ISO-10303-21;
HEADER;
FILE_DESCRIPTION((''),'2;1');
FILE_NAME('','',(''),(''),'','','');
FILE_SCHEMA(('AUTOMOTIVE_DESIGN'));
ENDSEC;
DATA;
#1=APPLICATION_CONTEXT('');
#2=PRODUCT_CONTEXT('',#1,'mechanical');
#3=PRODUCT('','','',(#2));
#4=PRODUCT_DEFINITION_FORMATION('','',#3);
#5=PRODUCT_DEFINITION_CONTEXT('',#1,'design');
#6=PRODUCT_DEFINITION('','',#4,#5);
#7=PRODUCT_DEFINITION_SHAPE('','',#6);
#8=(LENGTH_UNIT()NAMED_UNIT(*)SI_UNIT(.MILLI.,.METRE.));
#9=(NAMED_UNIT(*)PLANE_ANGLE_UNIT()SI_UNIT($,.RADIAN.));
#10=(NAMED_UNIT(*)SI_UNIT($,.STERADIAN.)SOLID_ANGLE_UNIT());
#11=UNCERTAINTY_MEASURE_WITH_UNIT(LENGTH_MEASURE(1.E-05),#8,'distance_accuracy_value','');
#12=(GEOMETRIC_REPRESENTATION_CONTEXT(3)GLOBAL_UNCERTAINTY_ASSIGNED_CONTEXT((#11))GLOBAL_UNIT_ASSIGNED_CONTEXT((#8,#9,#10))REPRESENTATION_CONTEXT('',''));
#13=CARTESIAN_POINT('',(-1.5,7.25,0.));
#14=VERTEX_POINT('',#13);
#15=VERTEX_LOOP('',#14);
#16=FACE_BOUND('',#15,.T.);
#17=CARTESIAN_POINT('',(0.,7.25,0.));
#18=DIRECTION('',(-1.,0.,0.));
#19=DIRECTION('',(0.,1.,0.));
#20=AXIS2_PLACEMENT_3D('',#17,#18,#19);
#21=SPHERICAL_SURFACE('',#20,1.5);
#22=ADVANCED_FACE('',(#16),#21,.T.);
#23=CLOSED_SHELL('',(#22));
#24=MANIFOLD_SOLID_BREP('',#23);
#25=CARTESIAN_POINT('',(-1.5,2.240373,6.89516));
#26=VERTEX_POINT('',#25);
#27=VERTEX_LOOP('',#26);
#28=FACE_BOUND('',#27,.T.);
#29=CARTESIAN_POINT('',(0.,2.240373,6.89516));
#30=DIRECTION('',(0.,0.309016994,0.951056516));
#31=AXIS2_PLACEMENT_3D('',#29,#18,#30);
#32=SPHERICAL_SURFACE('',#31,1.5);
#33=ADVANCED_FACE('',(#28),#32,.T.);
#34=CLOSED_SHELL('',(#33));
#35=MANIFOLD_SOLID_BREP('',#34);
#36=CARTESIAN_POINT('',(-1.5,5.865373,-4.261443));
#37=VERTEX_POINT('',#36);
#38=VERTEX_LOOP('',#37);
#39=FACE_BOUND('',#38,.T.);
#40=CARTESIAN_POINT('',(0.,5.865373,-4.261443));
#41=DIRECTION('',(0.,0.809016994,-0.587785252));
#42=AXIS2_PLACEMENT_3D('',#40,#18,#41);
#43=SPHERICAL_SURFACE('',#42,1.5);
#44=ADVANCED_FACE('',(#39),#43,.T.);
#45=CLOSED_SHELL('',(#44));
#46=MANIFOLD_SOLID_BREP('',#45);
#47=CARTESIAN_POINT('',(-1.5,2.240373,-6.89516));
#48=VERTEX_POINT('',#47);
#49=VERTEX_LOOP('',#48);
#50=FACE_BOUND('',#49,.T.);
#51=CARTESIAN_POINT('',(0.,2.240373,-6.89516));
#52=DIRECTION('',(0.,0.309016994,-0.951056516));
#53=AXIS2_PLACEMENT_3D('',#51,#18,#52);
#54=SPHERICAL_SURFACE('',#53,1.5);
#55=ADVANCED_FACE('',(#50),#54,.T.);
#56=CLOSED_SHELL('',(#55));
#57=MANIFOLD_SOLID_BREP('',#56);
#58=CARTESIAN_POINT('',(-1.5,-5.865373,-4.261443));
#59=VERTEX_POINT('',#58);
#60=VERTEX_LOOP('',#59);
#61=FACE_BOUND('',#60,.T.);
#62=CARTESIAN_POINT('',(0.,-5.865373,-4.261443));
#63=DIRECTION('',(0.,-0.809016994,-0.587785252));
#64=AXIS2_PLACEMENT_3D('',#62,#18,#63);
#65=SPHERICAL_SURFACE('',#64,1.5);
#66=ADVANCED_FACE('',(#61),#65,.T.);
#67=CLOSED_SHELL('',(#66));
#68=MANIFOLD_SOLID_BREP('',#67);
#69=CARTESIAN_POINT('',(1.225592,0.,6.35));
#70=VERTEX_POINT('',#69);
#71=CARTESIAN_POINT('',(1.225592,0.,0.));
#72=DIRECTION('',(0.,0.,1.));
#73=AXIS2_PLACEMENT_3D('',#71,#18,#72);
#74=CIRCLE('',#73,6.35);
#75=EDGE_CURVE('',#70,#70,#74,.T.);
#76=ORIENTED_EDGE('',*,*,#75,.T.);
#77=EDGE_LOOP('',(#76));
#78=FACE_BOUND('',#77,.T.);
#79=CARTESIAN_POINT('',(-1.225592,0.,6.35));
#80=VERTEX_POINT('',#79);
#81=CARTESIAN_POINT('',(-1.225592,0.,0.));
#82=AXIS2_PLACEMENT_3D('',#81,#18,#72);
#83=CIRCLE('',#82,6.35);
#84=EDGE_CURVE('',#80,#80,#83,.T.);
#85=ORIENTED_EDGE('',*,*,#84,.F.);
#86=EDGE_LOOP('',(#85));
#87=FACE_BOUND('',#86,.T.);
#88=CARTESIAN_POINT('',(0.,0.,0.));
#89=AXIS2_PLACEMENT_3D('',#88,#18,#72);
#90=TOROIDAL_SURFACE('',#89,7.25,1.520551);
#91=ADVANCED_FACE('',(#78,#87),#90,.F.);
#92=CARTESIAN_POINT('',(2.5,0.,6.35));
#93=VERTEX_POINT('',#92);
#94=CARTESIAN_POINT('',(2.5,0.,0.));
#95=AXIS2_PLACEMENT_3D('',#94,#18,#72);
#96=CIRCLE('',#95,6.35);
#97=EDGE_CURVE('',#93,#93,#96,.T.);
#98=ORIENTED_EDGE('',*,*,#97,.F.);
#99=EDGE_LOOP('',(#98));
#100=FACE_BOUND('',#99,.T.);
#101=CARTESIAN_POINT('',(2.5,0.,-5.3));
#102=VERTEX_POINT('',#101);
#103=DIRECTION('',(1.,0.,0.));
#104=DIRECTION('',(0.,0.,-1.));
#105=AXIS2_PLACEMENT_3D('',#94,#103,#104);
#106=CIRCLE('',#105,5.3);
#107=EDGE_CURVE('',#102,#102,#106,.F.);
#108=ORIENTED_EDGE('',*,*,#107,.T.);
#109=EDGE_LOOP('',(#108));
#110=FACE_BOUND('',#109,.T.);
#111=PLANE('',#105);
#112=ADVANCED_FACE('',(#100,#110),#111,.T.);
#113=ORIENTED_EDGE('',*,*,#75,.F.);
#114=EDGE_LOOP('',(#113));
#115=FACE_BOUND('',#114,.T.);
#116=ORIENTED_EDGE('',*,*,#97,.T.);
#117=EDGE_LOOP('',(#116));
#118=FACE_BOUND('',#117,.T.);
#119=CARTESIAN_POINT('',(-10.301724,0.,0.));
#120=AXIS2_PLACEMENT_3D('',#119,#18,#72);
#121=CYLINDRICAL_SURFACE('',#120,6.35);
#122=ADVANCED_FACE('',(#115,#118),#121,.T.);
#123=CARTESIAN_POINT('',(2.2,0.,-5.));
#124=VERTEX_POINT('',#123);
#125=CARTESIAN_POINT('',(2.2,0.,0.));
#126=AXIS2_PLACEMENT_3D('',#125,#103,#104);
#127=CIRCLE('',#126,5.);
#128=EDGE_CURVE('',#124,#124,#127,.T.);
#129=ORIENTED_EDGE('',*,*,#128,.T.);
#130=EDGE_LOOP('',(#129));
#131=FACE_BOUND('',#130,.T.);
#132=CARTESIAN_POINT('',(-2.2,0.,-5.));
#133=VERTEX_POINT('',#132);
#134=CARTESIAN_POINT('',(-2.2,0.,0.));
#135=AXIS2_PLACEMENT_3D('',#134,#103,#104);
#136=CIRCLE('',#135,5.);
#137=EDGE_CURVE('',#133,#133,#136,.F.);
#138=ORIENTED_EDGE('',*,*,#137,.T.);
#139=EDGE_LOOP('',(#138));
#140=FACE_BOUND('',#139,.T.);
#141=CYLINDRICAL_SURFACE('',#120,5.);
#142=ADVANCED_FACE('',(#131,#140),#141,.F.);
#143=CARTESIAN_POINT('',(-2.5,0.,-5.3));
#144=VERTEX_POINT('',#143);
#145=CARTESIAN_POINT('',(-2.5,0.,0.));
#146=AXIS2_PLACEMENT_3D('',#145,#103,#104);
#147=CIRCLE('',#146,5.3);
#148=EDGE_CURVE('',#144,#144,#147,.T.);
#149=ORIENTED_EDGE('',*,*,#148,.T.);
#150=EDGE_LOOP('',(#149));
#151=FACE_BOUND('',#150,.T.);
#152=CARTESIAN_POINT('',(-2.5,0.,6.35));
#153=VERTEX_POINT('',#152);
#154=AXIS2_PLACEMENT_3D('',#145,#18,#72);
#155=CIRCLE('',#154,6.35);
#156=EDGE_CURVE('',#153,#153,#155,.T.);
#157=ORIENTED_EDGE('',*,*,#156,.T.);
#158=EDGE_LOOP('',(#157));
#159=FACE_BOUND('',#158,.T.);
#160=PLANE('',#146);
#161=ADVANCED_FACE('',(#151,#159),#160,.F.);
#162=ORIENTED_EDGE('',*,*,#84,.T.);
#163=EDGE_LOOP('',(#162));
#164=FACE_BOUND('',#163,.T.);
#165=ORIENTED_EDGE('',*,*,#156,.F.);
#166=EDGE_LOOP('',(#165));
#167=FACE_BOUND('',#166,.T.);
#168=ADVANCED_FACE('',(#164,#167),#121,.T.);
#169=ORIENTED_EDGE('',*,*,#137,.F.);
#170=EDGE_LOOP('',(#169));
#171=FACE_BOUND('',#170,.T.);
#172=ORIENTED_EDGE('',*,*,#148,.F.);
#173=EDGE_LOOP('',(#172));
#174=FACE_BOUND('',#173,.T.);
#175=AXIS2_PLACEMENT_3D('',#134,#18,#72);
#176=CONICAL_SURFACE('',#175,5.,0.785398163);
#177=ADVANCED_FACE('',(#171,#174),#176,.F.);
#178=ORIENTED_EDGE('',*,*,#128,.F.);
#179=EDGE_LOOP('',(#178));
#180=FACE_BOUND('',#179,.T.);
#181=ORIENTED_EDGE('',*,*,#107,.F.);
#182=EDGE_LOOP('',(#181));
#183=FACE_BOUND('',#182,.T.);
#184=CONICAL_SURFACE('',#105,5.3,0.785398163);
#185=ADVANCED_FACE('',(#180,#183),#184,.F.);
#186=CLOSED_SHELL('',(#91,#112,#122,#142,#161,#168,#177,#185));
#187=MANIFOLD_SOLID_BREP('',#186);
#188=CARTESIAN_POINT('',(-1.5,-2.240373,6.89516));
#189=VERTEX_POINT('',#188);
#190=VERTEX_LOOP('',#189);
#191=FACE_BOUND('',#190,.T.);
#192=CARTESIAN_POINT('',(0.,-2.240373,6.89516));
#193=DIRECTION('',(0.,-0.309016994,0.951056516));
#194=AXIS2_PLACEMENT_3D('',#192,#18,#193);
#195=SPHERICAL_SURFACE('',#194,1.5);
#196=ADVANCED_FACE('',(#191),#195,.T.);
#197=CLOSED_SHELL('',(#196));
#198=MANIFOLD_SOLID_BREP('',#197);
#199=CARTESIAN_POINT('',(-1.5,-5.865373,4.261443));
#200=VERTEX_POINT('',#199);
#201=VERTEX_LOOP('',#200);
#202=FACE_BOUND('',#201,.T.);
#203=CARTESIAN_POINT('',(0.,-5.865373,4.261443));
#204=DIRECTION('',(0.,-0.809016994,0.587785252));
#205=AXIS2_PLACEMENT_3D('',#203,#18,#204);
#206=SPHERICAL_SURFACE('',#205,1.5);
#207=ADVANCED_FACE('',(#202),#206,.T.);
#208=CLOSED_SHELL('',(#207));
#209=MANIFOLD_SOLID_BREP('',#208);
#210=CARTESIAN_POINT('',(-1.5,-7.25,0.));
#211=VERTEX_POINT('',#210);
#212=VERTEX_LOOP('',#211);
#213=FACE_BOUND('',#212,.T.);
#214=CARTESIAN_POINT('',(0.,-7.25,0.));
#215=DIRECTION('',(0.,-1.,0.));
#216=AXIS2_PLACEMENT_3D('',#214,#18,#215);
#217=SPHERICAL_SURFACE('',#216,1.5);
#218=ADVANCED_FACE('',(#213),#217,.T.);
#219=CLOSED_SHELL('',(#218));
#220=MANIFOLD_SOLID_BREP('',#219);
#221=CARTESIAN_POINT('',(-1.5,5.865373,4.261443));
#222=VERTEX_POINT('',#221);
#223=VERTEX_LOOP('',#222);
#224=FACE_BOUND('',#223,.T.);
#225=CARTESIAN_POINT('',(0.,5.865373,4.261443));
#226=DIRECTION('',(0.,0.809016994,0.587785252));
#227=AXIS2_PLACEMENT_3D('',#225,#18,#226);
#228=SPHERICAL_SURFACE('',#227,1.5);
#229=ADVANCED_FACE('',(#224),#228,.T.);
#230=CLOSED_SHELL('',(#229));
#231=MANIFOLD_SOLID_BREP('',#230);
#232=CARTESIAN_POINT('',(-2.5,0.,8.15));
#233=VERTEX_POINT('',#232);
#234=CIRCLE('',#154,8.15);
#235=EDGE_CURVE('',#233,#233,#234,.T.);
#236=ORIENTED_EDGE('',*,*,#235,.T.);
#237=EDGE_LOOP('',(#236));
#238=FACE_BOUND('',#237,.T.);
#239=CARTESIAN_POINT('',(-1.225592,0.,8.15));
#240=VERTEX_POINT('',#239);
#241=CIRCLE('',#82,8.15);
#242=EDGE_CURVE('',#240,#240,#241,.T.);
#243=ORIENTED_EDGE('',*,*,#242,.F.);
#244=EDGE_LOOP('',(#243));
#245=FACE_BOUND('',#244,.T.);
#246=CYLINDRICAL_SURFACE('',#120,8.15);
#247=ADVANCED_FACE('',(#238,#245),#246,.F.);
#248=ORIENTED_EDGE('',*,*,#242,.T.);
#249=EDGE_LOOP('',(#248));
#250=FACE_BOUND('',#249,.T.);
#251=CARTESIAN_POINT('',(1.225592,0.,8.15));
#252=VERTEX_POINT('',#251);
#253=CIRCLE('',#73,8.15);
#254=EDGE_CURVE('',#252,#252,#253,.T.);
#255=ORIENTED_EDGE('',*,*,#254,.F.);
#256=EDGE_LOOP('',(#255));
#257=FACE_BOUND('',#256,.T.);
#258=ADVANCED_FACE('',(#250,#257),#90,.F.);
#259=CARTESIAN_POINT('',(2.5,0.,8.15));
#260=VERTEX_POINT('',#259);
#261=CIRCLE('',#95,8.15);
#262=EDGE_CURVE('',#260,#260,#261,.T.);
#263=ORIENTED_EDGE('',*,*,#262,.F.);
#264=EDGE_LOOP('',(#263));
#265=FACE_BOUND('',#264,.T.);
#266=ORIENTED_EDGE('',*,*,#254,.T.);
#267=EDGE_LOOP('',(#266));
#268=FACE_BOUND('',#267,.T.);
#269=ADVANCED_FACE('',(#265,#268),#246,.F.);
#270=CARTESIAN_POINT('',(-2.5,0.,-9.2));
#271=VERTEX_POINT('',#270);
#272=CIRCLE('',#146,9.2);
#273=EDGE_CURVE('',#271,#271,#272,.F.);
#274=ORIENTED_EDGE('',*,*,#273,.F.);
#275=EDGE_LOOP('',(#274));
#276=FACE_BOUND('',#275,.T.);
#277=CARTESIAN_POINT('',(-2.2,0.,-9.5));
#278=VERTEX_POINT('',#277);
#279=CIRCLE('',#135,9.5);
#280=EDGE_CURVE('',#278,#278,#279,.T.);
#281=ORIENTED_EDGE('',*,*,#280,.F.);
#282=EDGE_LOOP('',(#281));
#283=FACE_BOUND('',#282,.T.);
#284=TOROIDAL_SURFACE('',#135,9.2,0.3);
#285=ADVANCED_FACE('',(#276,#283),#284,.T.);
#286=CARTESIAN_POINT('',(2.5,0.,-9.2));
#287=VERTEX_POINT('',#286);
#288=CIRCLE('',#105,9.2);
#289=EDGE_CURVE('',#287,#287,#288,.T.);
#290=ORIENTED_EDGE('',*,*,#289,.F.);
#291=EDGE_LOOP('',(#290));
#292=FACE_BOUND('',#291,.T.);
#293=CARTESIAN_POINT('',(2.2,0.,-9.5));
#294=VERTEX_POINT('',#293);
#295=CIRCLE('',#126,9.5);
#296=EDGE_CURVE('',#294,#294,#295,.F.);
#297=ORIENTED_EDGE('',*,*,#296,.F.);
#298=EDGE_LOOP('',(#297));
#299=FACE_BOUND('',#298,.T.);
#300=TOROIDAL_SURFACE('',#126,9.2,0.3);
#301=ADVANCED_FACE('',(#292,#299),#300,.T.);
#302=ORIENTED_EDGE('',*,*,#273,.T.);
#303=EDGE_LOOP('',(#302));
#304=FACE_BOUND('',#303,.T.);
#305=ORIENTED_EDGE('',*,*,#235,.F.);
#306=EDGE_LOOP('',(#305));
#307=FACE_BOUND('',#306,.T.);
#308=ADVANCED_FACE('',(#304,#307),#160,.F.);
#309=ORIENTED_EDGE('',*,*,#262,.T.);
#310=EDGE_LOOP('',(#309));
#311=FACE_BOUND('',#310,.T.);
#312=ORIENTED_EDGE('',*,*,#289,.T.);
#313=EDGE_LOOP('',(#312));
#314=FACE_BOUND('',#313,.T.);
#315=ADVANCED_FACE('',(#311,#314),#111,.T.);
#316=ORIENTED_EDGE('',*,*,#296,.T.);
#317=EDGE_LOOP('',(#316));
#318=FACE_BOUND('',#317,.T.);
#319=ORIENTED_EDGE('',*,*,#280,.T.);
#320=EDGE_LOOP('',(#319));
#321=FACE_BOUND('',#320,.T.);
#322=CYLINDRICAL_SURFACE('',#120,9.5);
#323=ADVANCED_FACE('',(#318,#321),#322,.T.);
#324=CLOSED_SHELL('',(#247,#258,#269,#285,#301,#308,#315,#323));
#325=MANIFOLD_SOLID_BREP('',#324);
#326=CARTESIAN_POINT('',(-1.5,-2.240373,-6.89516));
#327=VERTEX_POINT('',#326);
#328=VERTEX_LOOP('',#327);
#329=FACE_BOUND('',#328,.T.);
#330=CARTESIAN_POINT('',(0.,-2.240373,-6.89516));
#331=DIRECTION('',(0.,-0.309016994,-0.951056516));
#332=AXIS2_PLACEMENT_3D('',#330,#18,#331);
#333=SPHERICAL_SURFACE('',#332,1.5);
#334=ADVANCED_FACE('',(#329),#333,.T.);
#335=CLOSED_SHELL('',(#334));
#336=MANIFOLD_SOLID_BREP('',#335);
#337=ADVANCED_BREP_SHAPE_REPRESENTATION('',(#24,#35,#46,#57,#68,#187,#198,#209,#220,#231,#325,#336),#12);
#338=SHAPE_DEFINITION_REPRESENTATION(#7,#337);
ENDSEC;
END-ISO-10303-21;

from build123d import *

# Parameters (mm, degrees)
CIRPATTERN2_COUNT = 10
FILLET1_R         = 0.3
CHAMFER1_SIZE     = 0.3


with BuildPart() as part:
    # Sketch1 → Revolve1 (revolve)
    with BuildSketch(Plane(origin=(0, 0, 0), x_dir=(1, 0, 0), z_dir=(0, 1, 0))):
        with BuildLine():
            Line((2.5, 8.15), (2.5, 9.5))
            Line((2.5, 9.5), (-2.5, 9.5))
            Line((-2.5, 9.5), (-2.5, 8.15))
            Line((-2.5, 8.15), (-1.225591592, 8.15))
            ThreePointArc((-1.225591592, 8.15), (0, 8.770550805), (1.225591592, 8.15))
            Line((1.225591592, 8.15), (2.5, 8.15))
        make_face()
        with BuildLine():
            ThreePointArc((1.225591592, 6.35), (0, 5.729449195), (-1.225591592, 6.35))
            Line((-1.225591592, 6.35), (-2.5, 6.35))
            Line((-2.5, 6.35), (-2.5, 5))
            Line((-2.5, 5), (2.5, 5))
            Line((2.5, 5), (2.5, 6.35))
            Line((2.5, 6.35), (1.225591592, 6.35))
        make_face()
    revolve(axis=Axis((-10.301724138, 0, 0), (1, 0, 0)))

    # Fillet1
    fillet1_edges = [part.edges().sort_by_distance(p)[0] for p in [
        (2.5, 0, 9.5),
        (-2.5, 0, 9.5),
    ]]
    fillet(fillet1_edges, radius=FILLET1_R)

    # Chamfer1
    chamfer1_edges = [part.edges().sort_by_distance(p)[0] for p in [
        (2.5, 0, 5),
        (-2.5, 0, 5),
    ]]
    chamfer(chamfer1_edges, length=CHAMFER1_SIZE)


with BuildPart() as body_2:
    # Sketch2 → Revolve2 (revolve)
    with BuildSketch(Plane.XY):
        with BuildLine():
            ThreePointArc((1.5, 7.25), (0, 8.75), (-1.5, 7.25))
            Line((-1.5, 7.25), (1.5, 7.25))
        make_face()
    revolve(axis=Axis((-1.5, 7.25, 0), (1, 0, 0)))


with BuildPart() as cirpattern2_1:
    # CirPattern2: pattern copy
    add(body_2.part.rotate(Axis((2.5, 0, 0), (-1, 0, 0)), 1 * 360 / CIRPATTERN2_COUNT))


with BuildPart() as cirpattern2_2:
    # CirPattern2: pattern copy
    add(body_2.part.rotate(Axis((2.5, 0, 0), (-1, 0, 0)), 2 * 360 / CIRPATTERN2_COUNT))


with BuildPart() as cirpattern2_3:
    # CirPattern2: pattern copy
    add(body_2.part.rotate(Axis((2.5, 0, 0), (-1, 0, 0)), 3 * 360 / CIRPATTERN2_COUNT))


with BuildPart() as cirpattern2_4:
    # CirPattern2: pattern copy
    add(body_2.part.rotate(Axis((2.5, 0, 0), (-1, 0, 0)), 4 * 360 / CIRPATTERN2_COUNT))


with BuildPart() as cirpattern2_5:
    # CirPattern2: pattern copy
    add(body_2.part.rotate(Axis((2.5, 0, 0), (-1, 0, 0)), 5 * 360 / CIRPATTERN2_COUNT))


with BuildPart() as cirpattern2_6:
    # CirPattern2: pattern copy
    add(body_2.part.rotate(Axis((2.5, 0, 0), (-1, 0, 0)), 6 * 360 / CIRPATTERN2_COUNT))


with BuildPart() as cirpattern2_7:
    # CirPattern2: pattern copy
    add(body_2.part.rotate(Axis((2.5, 0, 0), (-1, 0, 0)), 7 * 360 / CIRPATTERN2_COUNT))


with BuildPart() as cirpattern2_8:
    # CirPattern2: pattern copy
    add(body_2.part.rotate(Axis((2.5, 0, 0), (-1, 0, 0)), 8 * 360 / CIRPATTERN2_COUNT))


with BuildPart() as cirpattern2_9:
    # CirPattern2: pattern copy
    add(body_2.part.rotate(Axis((2.5, 0, 0), (-1, 0, 0)), 9 * 360 / CIRPATTERN2_COUNT))


solid = Compound([part.part, body_2.part, cirpattern2_1.part, cirpattern2_2.part, cirpattern2_3.part, cirpattern2_4.part, cirpattern2_5.part, cirpattern2_6.part, cirpattern2_7.part, cirpattern2_8.part, cirpattern2_9.part])
